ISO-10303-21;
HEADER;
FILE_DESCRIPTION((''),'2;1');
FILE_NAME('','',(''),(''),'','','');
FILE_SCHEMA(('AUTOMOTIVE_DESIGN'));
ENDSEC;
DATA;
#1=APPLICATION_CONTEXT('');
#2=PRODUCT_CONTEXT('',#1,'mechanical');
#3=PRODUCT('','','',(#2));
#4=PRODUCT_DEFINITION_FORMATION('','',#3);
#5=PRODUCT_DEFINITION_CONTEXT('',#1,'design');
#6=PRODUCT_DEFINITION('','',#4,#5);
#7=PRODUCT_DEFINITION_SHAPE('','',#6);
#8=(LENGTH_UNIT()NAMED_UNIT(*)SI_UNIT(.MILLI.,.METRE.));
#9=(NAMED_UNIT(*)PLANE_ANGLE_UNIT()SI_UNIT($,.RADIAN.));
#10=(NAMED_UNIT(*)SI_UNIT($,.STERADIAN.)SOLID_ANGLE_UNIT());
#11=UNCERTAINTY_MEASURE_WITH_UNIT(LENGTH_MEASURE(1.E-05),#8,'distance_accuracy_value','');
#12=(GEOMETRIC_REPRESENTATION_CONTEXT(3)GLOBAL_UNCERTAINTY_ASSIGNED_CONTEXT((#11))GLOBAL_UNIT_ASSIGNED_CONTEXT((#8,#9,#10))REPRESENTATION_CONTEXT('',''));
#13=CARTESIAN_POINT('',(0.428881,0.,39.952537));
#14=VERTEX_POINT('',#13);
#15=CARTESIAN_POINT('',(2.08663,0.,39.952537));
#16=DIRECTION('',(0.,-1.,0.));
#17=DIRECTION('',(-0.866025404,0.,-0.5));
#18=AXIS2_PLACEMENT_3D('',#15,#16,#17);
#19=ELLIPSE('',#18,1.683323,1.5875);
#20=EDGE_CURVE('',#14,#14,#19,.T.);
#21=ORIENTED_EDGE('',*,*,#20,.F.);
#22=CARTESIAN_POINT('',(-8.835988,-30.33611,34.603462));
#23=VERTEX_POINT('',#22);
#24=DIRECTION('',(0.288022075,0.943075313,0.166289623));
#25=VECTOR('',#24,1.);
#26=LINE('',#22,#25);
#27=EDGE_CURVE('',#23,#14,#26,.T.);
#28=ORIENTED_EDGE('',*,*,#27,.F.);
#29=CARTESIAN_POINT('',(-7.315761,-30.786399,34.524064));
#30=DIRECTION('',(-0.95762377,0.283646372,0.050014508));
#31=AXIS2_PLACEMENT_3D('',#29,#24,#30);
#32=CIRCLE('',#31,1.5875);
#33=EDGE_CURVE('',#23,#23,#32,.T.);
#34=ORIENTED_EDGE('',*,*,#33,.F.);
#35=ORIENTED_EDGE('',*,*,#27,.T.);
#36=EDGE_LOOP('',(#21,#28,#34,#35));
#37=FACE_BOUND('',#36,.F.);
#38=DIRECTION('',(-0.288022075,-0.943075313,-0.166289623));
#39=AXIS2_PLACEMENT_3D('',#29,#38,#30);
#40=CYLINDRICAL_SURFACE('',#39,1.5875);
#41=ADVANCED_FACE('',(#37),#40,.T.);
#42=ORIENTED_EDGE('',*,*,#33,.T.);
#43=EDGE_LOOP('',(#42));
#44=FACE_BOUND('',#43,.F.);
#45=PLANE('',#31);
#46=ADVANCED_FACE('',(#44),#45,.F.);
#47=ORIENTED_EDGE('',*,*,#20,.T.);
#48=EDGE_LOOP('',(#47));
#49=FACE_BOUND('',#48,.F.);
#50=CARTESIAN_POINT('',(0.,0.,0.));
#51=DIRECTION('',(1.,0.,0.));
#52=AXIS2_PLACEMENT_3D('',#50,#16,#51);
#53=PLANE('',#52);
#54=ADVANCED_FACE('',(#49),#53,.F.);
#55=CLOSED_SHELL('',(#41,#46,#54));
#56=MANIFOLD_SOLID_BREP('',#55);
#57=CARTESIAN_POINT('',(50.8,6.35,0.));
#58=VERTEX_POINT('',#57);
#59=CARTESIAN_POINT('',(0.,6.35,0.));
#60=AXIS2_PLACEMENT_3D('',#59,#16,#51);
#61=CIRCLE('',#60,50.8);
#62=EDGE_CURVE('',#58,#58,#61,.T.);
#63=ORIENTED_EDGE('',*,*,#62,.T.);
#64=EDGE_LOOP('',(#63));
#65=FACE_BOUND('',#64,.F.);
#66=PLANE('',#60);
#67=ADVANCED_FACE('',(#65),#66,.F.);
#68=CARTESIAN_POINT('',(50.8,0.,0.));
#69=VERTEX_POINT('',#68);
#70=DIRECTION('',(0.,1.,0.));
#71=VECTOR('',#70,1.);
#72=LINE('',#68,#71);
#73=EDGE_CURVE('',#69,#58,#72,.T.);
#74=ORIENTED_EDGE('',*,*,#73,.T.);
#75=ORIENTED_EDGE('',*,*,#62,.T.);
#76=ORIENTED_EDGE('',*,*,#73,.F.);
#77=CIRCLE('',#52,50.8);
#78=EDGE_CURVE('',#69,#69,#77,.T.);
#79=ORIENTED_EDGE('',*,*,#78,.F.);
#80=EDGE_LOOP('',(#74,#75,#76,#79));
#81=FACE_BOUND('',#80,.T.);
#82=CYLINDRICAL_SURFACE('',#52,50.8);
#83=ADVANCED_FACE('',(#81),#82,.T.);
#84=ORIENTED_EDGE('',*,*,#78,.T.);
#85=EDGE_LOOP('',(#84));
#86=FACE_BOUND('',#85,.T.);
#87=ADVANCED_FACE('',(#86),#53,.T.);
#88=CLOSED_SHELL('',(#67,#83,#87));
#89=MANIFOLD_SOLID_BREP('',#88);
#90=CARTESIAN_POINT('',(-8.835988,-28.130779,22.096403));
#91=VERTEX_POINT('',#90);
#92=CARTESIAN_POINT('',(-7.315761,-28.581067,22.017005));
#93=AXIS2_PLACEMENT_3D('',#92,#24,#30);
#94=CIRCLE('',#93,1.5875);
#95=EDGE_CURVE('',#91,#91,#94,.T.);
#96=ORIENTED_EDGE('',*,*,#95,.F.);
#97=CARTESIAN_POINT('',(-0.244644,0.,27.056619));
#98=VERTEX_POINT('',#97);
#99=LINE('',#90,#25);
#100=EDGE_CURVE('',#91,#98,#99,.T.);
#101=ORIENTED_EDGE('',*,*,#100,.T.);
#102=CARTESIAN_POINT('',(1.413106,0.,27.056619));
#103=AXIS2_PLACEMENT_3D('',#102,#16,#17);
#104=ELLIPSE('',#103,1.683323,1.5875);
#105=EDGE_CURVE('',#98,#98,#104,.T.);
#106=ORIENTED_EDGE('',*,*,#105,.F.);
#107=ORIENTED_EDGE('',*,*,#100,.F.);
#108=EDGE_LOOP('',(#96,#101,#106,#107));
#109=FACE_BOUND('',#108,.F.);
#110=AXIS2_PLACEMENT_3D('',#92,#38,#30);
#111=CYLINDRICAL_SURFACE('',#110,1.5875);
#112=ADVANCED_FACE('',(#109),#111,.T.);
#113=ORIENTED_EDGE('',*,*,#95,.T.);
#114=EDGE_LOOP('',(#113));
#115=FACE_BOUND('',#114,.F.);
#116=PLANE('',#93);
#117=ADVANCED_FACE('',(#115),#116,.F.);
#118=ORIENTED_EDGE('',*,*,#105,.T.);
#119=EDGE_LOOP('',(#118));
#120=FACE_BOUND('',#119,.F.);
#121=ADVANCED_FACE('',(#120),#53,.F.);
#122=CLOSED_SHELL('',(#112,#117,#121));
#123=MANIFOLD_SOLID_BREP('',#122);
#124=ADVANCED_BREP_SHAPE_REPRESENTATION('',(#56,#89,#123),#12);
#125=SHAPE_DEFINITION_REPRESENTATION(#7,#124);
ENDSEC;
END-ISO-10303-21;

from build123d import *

# Parameters (mm, degrees)
F0_R     = 50.8
F1_DEPTH = 6.35
F5_R     = 1.5875


# Not quite as in the source:
# - a length typed as a fraction of an inch, garbled in the dataset ("3 / 203.2 mm" for 3/8 in), is restored


with BuildPart() as f1:
    # F0 (on Front) → F1 (new body)
    with BuildSketch(Plane.XZ):
        Circle(F0_R)
    extrude(amount=-F1_DEPTH)


with BuildPart() as f6:
    # F5 (on offset) → F6 (new body, up to the next surface of F1)
    with BuildSketch(Plane(origin=(-7.3157607037, -23.9541129475, -4.2237564116), x_dir=(-0.9576237697, 0.2836463724, 0.0500145084), z_dir=(0.2880220749, 0.9430753129, 0.1662896225))):
        with Locations((0, 26.6455678842)):
            Circle(F5_R)
    extrude(until=Until.NEXT, target=f1.part)


with BuildPart() as f6b:
    # F5 (on offset) → F6, piece 2 (new body, up to the next surface of F1)
    with BuildSketch(Plane(origin=(-7.3157607037, -23.9541129475, -4.2237564116), x_dir=(-0.9576237697, 0.2836463724, 0.0500145084), z_dir=(0.2880220749, 0.9430753129, 0.1662896225))):
        with Locations((0, 39.3455678842)):
            Circle(F5_R)
    extrude(until=Until.NEXT, target=f1.part)


solid = Compound([f1.part, f6.part, f6b.part])
